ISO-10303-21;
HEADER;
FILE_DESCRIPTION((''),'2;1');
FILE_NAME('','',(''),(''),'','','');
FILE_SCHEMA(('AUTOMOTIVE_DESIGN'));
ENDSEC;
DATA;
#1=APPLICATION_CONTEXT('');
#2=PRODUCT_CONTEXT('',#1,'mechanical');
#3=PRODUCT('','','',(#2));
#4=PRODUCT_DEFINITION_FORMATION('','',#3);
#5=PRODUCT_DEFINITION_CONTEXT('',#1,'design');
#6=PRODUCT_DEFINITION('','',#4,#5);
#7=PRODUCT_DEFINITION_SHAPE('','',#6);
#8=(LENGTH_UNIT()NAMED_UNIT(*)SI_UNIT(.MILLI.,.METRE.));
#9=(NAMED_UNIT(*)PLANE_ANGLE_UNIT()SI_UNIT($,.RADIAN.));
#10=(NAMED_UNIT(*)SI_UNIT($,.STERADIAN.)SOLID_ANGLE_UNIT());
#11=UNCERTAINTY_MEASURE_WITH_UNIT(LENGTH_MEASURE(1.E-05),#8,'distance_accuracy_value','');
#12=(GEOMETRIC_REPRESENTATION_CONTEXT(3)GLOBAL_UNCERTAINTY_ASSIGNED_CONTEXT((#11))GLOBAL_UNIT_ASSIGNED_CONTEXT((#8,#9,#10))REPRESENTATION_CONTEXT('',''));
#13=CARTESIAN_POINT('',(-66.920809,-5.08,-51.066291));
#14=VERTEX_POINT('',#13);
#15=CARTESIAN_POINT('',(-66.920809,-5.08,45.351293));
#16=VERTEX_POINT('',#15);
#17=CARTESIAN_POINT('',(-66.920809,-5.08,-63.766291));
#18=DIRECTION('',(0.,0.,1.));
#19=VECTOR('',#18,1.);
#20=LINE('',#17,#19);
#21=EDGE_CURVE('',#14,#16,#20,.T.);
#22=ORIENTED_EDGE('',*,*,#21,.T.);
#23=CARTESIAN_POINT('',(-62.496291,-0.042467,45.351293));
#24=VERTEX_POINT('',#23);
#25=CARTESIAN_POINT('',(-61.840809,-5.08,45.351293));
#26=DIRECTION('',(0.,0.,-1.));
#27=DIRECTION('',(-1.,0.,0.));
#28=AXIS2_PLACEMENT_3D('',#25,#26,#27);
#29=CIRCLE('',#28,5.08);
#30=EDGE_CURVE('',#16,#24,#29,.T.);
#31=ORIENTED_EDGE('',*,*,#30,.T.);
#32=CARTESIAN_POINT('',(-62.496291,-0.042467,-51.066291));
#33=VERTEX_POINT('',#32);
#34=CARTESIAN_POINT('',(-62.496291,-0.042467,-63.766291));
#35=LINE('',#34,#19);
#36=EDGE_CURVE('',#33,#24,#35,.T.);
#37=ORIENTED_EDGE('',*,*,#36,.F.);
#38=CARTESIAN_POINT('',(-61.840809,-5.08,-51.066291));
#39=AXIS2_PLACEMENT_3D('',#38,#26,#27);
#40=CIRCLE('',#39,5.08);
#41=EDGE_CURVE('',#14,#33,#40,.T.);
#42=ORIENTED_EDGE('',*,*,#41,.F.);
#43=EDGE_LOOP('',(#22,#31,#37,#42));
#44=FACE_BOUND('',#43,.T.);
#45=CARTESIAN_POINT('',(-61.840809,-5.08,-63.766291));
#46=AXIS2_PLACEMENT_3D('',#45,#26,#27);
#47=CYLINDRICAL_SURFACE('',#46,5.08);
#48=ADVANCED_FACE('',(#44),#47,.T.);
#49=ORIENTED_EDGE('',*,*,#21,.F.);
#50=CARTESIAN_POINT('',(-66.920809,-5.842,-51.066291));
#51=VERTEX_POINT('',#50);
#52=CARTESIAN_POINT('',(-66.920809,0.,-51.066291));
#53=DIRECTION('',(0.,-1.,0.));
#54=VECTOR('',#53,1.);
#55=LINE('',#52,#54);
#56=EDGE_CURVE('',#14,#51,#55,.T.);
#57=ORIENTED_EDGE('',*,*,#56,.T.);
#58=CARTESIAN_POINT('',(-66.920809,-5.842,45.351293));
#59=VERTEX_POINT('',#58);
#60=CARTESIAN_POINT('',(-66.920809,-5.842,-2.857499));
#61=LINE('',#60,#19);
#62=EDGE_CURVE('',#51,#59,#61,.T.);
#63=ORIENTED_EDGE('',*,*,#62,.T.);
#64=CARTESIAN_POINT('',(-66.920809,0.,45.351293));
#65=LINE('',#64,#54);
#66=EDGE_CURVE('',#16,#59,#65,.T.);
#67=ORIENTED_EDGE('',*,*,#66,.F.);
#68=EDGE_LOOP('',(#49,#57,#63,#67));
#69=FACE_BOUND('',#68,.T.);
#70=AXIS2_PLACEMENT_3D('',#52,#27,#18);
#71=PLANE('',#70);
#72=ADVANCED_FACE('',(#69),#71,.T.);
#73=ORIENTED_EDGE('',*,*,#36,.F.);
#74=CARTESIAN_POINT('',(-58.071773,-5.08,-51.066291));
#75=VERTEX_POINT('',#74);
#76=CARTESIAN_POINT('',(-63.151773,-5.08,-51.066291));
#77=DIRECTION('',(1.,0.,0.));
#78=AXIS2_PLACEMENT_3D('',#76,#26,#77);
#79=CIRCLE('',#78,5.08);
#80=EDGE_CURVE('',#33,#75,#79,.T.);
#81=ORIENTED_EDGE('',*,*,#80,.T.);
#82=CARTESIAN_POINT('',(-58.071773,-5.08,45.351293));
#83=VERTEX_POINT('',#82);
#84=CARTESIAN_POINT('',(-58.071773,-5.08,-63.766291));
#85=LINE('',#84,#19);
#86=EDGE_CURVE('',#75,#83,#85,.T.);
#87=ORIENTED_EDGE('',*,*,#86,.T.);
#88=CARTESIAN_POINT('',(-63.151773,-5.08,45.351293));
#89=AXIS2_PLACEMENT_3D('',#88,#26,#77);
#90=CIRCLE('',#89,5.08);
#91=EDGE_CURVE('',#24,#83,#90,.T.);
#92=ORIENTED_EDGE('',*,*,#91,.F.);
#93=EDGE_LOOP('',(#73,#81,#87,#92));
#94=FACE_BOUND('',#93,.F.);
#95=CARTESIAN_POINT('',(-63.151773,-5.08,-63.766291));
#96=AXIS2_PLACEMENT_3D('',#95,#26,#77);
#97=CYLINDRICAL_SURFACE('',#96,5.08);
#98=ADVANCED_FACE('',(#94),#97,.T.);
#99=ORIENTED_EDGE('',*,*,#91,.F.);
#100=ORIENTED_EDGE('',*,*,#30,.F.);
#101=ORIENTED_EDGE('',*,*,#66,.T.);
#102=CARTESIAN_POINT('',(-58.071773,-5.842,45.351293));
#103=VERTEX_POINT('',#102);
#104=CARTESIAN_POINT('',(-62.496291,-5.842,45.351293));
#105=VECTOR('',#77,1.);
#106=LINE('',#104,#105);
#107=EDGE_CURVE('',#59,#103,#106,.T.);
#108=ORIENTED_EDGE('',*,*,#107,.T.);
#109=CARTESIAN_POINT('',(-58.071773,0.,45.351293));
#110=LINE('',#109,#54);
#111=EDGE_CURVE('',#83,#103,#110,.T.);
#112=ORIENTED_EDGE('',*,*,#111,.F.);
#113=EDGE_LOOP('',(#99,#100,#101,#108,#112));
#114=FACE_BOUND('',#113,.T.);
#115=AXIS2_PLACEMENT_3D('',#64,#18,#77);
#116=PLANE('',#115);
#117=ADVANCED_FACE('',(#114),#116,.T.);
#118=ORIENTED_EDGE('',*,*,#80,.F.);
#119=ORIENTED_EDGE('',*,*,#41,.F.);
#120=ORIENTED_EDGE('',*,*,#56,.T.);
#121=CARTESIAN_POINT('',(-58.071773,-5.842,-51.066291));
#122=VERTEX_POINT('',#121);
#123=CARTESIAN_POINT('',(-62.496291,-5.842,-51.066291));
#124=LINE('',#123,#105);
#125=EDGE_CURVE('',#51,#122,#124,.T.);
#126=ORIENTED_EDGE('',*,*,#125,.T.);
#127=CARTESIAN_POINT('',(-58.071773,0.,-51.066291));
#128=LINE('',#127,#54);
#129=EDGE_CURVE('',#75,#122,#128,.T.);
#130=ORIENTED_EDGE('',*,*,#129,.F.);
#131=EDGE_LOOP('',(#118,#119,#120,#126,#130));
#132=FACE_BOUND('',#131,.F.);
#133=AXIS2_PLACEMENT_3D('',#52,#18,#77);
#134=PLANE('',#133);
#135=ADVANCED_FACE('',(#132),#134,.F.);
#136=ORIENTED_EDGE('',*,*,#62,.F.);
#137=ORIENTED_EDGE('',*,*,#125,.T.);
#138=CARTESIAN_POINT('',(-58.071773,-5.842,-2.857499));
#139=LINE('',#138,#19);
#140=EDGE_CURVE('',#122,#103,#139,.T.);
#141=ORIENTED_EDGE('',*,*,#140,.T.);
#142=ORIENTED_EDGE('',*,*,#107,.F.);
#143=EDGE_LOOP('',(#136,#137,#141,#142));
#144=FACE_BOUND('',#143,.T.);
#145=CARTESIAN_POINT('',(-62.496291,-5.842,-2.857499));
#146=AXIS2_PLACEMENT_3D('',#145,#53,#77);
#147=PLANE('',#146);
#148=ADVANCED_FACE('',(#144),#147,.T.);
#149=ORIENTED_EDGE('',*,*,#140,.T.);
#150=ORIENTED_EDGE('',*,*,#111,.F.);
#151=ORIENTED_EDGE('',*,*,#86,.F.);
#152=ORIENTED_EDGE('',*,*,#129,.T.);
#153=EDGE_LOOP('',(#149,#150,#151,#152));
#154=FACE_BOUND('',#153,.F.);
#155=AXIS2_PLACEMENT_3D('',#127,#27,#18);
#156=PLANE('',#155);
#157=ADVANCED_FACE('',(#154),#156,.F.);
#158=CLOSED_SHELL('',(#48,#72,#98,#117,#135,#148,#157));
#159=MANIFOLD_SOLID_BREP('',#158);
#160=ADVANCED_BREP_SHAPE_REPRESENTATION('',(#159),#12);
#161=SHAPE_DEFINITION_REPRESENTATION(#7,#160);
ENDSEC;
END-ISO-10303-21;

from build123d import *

# Parameters (mm, degrees)
F0_W        = 8.8490359485
F0_H        = 96.4175835252
F1_DEPTH    = 5.842
F2_T1_DEPTH = 121.8175835252


# Not quite as in the source:
# - a fillet or chamfer that OpenCascade refuses, or shapes differently, is made with other operations: its cross-section is extruded or revolved along the edge and cut away or added


with BuildPart() as f1:
    # F0 (on Front) → F1 (new body)
    with BuildSketch(Plane.XZ):
        with Locations((-62.4962914735, -2.8574988246)):
            Rectangle(F0_W, F0_H)
    extrude(amount=F1_DEPTH)

    # F2: fillet of radius 5.08 on 2 edges, made by hand

    # F2_s2 → F2_t1 (cut)
    with BuildSketch(Plane.XY.offset(-63.7662905872)):
        with BuildLine():
            ThreePointArc((-58.0717734993, -5.08), (-59.5596710508, -1.4878975516), (-63.1517734993, 0))
            Line((-63.1517734993, 0), (-58.0717734993, 0))
            Line((-58.0717734993, 0), (-58.0717734993, -5.08))
        make_face()
        with BuildLine():
            ThreePointArc((-66.9208094478, -5.08), (-65.4329118962, -1.4878975516), (-61.8408094478, 0))
            Line((-61.8408094478, 0), (-66.9208094478, 0))
            Line((-66.9208094478, 0), (-66.9208094478, -5.08))
        make_face()
    extrude(amount=F2_T1_DEPTH, mode=Mode.SUBTRACT)


solid = f1.part
